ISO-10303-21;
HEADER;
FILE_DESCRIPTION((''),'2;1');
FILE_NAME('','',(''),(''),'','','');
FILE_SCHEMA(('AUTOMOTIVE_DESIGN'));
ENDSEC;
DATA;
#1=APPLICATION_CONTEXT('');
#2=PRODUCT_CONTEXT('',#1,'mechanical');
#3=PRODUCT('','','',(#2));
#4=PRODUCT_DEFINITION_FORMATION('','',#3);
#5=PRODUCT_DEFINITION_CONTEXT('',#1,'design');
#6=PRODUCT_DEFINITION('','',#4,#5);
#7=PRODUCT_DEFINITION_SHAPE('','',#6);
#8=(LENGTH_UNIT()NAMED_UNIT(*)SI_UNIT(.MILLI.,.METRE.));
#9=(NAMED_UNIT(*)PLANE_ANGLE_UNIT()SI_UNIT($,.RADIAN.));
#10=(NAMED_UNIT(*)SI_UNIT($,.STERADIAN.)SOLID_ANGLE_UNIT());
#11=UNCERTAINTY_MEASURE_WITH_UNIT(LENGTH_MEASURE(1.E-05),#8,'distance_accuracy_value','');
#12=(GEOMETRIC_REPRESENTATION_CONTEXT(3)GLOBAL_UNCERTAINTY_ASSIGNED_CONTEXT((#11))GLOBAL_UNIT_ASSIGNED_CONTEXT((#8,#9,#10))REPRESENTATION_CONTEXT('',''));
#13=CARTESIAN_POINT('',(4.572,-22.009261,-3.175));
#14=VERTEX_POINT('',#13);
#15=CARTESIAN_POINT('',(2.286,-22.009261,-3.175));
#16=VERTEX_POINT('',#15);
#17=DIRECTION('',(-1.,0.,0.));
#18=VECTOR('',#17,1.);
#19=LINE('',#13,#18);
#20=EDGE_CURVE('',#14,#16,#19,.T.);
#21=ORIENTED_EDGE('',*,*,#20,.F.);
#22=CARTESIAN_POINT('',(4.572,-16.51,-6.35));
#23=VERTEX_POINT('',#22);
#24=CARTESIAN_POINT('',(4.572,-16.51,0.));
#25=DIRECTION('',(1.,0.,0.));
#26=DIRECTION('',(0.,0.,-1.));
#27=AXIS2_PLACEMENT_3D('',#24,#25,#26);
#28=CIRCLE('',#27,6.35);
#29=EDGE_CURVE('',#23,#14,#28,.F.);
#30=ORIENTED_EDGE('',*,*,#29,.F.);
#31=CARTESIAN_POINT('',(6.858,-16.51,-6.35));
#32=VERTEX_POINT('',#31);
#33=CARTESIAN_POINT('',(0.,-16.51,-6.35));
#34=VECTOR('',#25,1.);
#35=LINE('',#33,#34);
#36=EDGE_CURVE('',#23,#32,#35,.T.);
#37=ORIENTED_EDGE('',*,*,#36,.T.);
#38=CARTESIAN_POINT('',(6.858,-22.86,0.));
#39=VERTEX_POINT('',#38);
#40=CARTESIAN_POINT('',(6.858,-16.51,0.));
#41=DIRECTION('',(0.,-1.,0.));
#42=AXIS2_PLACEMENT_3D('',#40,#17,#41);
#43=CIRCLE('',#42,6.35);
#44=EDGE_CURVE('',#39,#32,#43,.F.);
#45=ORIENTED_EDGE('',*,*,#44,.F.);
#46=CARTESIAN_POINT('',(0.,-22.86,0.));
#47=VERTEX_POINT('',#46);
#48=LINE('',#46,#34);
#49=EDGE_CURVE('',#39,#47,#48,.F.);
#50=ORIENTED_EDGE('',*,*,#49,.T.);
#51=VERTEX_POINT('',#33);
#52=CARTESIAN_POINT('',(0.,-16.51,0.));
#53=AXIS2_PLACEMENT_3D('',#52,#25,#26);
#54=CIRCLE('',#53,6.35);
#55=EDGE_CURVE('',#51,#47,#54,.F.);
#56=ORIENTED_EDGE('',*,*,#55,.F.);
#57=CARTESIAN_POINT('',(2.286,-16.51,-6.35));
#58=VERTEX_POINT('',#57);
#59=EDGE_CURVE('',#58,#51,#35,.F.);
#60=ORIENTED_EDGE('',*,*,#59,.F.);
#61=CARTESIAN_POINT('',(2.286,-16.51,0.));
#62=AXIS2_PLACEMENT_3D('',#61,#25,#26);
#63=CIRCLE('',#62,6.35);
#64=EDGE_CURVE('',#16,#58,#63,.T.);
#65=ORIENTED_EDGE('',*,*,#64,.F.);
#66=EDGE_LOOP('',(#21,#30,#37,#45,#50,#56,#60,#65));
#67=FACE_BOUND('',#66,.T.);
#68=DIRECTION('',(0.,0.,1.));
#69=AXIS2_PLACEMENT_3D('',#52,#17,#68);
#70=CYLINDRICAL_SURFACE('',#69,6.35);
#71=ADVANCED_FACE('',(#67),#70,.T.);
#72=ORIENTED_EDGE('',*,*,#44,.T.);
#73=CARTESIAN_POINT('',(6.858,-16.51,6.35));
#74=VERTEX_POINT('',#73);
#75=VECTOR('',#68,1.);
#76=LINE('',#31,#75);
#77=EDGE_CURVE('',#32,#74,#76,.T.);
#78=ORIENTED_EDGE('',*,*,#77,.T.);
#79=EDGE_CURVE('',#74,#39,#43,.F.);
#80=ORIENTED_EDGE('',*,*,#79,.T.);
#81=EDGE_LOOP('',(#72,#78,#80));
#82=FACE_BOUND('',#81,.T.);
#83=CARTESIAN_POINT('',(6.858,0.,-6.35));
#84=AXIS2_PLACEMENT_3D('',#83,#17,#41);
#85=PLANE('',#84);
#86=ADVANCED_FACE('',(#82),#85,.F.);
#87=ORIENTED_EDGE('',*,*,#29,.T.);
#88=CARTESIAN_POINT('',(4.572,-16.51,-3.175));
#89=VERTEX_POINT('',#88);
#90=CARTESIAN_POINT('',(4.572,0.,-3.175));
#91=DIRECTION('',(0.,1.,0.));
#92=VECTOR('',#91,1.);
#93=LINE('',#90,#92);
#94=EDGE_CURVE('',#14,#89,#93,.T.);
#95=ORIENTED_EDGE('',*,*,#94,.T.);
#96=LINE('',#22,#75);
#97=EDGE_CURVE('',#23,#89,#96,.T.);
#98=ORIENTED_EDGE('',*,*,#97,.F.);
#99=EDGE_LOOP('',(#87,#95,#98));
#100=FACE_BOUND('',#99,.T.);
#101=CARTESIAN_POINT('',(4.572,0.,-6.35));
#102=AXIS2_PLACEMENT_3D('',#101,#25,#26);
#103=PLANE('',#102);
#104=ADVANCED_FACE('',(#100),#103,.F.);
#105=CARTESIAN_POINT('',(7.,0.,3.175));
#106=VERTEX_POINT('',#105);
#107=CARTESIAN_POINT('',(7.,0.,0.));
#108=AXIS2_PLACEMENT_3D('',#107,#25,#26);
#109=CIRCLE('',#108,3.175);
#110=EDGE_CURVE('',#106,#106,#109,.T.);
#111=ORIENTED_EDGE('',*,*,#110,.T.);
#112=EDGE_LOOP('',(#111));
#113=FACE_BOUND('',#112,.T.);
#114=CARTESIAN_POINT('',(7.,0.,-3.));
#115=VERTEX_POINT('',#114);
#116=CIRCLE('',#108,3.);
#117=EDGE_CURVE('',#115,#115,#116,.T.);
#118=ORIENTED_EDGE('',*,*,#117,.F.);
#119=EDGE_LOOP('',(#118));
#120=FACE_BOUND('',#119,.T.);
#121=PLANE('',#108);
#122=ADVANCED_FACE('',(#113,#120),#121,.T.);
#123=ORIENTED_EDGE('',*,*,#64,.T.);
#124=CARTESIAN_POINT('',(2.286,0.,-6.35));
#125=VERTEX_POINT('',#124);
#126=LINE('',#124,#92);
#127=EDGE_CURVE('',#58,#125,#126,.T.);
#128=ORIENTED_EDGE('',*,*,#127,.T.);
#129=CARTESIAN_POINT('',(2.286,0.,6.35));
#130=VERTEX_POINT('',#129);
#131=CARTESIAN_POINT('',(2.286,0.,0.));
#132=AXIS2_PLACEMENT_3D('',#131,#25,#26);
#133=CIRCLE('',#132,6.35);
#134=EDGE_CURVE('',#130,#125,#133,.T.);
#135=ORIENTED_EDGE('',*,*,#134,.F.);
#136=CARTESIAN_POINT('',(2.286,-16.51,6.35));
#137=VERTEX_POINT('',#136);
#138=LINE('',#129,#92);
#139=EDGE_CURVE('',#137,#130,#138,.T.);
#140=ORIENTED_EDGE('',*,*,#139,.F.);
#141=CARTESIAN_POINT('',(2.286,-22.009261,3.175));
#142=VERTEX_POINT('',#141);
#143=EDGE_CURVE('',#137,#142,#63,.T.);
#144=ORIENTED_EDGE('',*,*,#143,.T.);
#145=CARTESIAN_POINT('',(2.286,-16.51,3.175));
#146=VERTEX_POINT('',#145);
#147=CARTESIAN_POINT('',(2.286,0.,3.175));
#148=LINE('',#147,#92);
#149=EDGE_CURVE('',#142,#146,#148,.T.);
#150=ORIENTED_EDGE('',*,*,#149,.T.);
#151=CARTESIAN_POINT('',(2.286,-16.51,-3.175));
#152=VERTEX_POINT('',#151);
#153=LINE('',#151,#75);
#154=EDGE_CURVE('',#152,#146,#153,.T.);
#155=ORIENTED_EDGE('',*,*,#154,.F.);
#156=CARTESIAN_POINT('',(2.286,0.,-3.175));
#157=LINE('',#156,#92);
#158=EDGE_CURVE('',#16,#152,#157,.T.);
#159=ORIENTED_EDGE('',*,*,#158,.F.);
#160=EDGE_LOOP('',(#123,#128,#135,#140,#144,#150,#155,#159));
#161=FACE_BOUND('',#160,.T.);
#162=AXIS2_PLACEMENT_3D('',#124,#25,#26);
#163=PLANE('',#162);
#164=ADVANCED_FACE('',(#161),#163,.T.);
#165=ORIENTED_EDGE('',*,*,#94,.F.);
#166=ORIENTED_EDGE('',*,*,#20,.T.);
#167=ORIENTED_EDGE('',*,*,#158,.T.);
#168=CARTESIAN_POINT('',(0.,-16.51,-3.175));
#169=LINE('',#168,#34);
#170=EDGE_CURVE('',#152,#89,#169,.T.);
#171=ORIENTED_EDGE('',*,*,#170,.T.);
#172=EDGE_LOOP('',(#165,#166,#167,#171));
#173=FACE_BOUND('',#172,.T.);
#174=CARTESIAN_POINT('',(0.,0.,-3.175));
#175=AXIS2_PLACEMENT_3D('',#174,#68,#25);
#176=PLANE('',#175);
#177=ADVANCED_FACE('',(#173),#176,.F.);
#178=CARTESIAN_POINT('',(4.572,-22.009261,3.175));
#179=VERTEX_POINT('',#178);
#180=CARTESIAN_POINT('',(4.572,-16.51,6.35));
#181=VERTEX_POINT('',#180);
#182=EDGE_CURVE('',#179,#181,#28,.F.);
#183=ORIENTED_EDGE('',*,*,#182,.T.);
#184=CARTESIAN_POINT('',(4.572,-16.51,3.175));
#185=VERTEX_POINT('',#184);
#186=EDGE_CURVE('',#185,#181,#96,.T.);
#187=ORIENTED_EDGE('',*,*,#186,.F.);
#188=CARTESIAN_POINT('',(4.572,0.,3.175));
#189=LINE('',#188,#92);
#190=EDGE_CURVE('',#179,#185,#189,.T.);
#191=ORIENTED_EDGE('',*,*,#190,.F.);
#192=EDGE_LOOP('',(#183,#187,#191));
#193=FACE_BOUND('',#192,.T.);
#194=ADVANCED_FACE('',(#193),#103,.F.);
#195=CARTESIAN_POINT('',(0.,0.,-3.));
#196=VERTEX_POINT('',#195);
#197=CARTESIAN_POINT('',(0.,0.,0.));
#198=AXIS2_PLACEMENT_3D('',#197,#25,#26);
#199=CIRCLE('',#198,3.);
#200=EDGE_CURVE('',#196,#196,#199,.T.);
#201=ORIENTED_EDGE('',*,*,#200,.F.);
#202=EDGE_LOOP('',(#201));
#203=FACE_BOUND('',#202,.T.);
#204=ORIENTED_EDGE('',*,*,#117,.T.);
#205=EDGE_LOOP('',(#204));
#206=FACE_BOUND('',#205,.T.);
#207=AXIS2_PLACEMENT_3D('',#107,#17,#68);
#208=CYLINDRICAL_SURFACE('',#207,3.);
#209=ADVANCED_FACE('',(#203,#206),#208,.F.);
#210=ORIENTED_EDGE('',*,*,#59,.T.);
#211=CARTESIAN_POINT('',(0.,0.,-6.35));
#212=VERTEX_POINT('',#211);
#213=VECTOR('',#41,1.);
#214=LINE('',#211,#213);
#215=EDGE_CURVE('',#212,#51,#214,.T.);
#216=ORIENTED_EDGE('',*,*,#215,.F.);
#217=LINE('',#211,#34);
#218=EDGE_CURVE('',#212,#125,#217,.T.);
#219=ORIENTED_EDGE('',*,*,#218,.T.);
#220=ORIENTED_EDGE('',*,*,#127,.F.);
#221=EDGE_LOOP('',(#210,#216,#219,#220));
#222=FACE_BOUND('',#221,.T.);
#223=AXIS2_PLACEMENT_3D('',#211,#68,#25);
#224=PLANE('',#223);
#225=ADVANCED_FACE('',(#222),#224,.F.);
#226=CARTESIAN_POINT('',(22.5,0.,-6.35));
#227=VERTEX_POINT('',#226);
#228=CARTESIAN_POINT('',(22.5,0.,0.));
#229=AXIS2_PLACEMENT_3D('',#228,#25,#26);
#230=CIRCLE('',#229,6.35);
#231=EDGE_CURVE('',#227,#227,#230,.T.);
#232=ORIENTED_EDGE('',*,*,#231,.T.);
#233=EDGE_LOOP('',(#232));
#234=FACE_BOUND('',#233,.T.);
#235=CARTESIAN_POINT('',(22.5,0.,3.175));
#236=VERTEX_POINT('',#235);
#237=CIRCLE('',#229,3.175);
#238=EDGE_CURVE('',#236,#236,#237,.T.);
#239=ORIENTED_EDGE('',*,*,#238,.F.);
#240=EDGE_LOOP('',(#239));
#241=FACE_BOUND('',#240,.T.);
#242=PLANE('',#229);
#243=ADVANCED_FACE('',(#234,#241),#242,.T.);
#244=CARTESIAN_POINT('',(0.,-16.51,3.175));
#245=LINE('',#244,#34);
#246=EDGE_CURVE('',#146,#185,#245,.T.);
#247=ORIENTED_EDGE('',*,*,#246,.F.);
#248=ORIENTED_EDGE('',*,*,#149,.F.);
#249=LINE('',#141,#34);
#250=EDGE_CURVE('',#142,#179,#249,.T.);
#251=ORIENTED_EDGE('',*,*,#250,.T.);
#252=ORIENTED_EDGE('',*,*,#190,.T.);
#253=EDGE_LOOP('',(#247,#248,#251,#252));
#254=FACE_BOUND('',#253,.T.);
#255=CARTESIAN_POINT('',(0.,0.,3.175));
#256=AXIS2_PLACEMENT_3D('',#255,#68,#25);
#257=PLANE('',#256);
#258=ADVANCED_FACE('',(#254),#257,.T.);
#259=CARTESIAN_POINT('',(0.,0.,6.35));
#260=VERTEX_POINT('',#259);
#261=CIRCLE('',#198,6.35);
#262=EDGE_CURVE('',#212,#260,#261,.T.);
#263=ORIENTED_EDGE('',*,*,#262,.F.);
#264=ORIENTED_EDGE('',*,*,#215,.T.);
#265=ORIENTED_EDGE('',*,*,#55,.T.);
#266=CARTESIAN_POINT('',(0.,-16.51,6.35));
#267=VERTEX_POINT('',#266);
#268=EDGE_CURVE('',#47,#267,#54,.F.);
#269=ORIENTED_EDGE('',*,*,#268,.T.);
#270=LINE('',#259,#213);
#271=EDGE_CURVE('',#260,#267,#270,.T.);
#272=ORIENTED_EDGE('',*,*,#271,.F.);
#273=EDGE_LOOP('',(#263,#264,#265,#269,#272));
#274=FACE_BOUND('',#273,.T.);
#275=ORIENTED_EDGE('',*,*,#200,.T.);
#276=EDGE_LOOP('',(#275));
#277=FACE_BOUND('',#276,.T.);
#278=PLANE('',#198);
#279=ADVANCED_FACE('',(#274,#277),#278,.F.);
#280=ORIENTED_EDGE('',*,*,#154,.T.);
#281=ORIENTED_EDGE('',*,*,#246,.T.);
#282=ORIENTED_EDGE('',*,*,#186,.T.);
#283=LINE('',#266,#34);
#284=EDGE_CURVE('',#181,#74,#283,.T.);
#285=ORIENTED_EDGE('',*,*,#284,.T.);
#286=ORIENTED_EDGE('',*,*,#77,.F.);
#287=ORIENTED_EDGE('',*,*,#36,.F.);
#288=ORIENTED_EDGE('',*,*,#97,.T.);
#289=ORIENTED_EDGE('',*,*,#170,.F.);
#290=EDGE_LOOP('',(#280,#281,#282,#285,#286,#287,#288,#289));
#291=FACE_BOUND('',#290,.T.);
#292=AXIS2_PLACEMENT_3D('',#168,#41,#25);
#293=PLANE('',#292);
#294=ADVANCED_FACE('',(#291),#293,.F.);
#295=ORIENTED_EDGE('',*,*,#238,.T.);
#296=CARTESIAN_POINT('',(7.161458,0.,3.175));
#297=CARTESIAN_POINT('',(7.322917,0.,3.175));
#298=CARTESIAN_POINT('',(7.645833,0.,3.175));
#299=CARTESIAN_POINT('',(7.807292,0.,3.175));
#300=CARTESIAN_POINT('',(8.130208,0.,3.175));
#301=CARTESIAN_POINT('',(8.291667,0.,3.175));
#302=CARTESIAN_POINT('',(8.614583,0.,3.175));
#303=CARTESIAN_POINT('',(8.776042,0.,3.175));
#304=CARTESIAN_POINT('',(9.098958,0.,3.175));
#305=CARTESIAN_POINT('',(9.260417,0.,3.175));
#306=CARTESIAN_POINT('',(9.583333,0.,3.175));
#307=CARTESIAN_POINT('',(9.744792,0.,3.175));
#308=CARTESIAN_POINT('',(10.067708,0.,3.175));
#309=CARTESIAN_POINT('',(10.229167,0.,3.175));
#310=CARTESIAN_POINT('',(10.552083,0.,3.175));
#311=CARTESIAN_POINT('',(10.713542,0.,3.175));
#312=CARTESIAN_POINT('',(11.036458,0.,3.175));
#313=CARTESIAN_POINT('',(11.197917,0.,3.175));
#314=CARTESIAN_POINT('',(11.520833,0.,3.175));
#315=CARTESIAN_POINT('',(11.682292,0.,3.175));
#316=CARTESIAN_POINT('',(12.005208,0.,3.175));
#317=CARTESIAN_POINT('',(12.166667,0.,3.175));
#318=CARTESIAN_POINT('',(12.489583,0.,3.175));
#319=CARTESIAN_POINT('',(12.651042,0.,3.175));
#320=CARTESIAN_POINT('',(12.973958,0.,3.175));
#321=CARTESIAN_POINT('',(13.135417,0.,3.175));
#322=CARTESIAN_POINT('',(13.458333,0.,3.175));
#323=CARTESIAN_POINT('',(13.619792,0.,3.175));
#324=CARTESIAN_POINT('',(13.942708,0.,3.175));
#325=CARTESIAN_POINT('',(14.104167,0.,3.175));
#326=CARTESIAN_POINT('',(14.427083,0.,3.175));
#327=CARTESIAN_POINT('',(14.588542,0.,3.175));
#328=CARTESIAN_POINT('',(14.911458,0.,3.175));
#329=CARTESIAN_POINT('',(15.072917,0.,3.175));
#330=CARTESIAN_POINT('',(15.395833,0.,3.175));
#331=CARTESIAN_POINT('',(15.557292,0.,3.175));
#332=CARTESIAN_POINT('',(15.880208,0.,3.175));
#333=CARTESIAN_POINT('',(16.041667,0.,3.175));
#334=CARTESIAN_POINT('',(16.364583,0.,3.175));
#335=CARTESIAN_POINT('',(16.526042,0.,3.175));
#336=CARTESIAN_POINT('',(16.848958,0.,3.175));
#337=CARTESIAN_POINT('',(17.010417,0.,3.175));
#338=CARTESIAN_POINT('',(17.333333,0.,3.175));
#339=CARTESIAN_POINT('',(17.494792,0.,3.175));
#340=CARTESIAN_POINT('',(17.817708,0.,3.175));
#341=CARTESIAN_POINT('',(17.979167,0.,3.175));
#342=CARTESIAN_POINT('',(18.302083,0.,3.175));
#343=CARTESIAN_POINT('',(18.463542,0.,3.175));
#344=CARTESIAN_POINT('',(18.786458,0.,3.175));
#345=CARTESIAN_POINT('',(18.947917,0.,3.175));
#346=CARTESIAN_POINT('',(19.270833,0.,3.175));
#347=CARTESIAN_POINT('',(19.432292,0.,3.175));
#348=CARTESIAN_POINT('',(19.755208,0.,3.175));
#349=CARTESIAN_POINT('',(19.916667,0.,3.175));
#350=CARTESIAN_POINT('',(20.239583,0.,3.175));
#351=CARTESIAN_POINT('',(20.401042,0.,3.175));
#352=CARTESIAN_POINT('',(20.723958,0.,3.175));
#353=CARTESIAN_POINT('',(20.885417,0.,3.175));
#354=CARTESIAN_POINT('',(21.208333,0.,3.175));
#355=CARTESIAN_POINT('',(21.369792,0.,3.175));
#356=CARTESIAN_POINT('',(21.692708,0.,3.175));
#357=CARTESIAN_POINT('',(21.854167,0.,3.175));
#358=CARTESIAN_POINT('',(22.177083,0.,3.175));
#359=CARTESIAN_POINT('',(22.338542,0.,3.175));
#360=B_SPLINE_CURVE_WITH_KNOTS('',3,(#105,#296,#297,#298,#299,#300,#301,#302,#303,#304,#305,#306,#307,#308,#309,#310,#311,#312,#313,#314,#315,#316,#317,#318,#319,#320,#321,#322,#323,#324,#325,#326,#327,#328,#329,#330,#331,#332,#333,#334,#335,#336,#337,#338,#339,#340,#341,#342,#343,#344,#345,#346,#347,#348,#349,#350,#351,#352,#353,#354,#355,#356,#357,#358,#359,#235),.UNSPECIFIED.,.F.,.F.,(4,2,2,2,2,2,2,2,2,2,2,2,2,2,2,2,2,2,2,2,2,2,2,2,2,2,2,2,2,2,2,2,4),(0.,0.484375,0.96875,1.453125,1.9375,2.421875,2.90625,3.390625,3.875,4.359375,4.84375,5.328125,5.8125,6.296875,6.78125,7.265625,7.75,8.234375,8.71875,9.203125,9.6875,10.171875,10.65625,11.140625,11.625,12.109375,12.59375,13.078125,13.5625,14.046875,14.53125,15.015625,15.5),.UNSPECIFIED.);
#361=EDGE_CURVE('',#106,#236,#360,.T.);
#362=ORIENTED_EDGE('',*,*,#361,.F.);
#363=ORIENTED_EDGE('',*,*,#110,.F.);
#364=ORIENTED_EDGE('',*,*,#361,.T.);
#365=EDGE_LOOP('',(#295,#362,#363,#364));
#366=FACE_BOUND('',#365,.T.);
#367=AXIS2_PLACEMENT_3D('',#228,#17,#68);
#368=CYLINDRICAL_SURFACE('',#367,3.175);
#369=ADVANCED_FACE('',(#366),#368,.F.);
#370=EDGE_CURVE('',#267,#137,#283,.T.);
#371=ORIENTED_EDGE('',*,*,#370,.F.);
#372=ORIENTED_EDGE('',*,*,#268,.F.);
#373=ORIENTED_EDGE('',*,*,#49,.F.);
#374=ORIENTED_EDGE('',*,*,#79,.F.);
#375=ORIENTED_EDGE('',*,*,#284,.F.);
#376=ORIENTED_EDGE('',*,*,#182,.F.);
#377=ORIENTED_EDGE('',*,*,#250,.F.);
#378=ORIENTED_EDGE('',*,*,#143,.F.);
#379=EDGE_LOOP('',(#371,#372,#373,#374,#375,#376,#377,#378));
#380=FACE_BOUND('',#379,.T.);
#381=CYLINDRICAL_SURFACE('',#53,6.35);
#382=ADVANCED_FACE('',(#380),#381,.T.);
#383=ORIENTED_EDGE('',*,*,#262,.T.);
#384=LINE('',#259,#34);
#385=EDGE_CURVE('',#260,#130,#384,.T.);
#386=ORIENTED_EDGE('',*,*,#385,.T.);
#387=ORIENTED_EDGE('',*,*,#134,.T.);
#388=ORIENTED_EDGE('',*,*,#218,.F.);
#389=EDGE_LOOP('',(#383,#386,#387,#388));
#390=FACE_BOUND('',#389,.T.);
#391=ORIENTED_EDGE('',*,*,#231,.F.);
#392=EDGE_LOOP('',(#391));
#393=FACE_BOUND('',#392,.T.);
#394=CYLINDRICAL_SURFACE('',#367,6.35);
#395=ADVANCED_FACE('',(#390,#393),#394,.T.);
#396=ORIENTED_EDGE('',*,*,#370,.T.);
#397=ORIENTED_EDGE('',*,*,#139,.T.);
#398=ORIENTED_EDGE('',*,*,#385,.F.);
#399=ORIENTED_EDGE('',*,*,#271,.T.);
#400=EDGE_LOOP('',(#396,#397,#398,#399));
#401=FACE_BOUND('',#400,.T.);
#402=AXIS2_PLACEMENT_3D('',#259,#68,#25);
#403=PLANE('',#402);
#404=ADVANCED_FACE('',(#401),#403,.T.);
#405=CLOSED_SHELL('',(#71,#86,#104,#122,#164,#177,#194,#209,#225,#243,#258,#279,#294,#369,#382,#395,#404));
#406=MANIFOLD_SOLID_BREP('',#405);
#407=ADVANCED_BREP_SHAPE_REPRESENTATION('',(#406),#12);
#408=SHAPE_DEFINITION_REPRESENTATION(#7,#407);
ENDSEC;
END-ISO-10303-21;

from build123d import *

# Parameters (mm, degrees)
SKETCH1_R                = 6.35
SKETCH1_R_2              = 3.175
BOSS_EXTRUDE1_DEPTH      = 22.5
SKETCH1_3_R              = 3.175
SKETCH1_3_R_2            = 3
BOSS_EXTRUDE2_DEPTH      = 7
BOSS_EXTRUDE3_DEPTH      = 6.35
BOSS_EXTRUDE3_DEPTH_BACK = 6.35
SKETCH3_W                = 6.35
SKETCH3_H                = 2.286
BOSS_EXTRUDE4_DEPTH      = 3.175
BOSS_EXTRUDE4_DEPTH_BACK = 3.175
SKETCH3_4_W              = 6.35
SKETCH3_4_H              = 2.286
SKETCH1_4_R              = 3
CUT_EXTRUDE2_DEPTH       = 33.697891369
FILLET1_R                = 6.35


with BuildPart() as part:
    # Sketch1 → Boss-Extrude1 (new body)
    with BuildSketch(Plane.YZ):
        with Locations(Location((0, 0, 0), (0, 0, 90))):
            Circle(SKETCH1_R)
        with Locations(Location((0, 0, 0), (0, 0, 90))):
            Circle(SKETCH1_R_2, mode=Mode.SUBTRACT)
    extrude(amount=BOSS_EXTRUDE1_DEPTH)

    # Sketch1<3> → Boss-Extrude2 (add)
    with BuildSketch(Plane.YZ):
        with Locations(Location((0, 0, 0), (0, 0, 90))):
            Circle(SKETCH1_3_R)
        with Locations(Location((0, 0, 0), (0, 0, 270))):
            Circle(SKETCH1_3_R_2, mode=Mode.SUBTRACT)
    extrude(amount=BOSS_EXTRUDE2_DEPTH)

    # Sketch3 → Boss-Extrude3 (add, two sides: drawn at the far end of the back side and taken through both)
    with BuildSketch(Plane(origin=(0, 0, 0), x_dir=(0, 1, 0), z_dir=(0, 0, 1)).offset(-BOSS_EXTRUDE3_DEPTH_BACK)):
        Polygon((0, -2.286), (0, 0), (-22.86, 0), (-22.86, -2.286), (-16.51, -2.286), align=None)
        with Locations((-19.685, -5.715)):
            Rectangle(SKETCH3_W, SKETCH3_H)
    extrude(amount=BOSS_EXTRUDE3_DEPTH + BOSS_EXTRUDE3_DEPTH_BACK)


with BuildPart() as boss_extrude3_piece_1:
    # of the separate pieces the step leaves, piece 1, a body of its own (boss_extrude3_pieces)
    add(part.part.solids().sort_by_distance((0, 0, -6.35))[0])



with BuildPart() as boss_extrude3_piece_2:
    # of the separate pieces the step leaves, piece 2, a body of its own (boss_extrude3_pieces)
    add(part.part.solids().sort_by_distance((4.572, -16.51, 6.35))[0])


with BuildPart() as boss_extrude3_piece_1_1:
    add(boss_extrude3_piece_1.part)

    add(boss_extrude3_piece_2.part)  # Boss-Extrude4 merges Boss-Extrude3 piece 2
    # Sketch3<4> → Boss-Extrude4 (add, two sides: drawn at the far end of the back side and taken through both)
    with BuildSketch(Plane(origin=(0, 0, 0), x_dir=(0, 1, 0), z_dir=(0, 0, 1)).offset(-BOSS_EXTRUDE4_DEPTH_BACK)):
        with Locations((-19.685, -3.429)):
            Rectangle(SKETCH3_4_W, SKETCH3_4_H)
    extrude(amount=BOSS_EXTRUDE4_DEPTH + BOSS_EXTRUDE4_DEPTH_BACK)

    # Sketch1<4> → Cut-Extrude2 (cut, through all)
    with BuildSketch(Plane.YZ):
        with Locations(Location((0, 0, 0), (0, 0, 270))):
            Circle(SKETCH1_4_R)
    extrude(amount=CUT_EXTRUDE2_DEPTH, mode=Mode.SUBTRACT)

    # Fillet1
    # the kernel refuses this fillet: 6.35 mm, written as the material it takes off along each edge
    with BuildSketch(Plane(origin=(-15.875, -22.86, -6.35), x_dir=(0, 1, 0), z_dir=(1, 0, 0))) as fillet1_piece_1:
        with BuildLine():
            CenterArc((FILLET1_R, FILLET1_R), FILLET1_R, 180, 90)
            Line((0, FILLET1_R), (0, 0))
            Line((0, 0), (FILLET1_R, 0))
        make_face()
    extrude(amount=34.036, mode=Mode.SUBTRACT)
    with BuildSketch(Plane(origin=(-15.875, -22.86, 6.35), x_dir=(0, 1, 0), z_dir=(1, 0, 0))) as fillet1_piece_2:
        with BuildLine():
            CenterArc((FILLET1_R, -FILLET1_R), FILLET1_R, 90, 90)
            Line((0, -FILLET1_R), (0, 0))
            Line((0, 0), (FILLET1_R, 0))
        make_face()
    extrude(amount=34.036, mode=Mode.SUBTRACT)


solid = boss_extrude3_piece_1_1.part
